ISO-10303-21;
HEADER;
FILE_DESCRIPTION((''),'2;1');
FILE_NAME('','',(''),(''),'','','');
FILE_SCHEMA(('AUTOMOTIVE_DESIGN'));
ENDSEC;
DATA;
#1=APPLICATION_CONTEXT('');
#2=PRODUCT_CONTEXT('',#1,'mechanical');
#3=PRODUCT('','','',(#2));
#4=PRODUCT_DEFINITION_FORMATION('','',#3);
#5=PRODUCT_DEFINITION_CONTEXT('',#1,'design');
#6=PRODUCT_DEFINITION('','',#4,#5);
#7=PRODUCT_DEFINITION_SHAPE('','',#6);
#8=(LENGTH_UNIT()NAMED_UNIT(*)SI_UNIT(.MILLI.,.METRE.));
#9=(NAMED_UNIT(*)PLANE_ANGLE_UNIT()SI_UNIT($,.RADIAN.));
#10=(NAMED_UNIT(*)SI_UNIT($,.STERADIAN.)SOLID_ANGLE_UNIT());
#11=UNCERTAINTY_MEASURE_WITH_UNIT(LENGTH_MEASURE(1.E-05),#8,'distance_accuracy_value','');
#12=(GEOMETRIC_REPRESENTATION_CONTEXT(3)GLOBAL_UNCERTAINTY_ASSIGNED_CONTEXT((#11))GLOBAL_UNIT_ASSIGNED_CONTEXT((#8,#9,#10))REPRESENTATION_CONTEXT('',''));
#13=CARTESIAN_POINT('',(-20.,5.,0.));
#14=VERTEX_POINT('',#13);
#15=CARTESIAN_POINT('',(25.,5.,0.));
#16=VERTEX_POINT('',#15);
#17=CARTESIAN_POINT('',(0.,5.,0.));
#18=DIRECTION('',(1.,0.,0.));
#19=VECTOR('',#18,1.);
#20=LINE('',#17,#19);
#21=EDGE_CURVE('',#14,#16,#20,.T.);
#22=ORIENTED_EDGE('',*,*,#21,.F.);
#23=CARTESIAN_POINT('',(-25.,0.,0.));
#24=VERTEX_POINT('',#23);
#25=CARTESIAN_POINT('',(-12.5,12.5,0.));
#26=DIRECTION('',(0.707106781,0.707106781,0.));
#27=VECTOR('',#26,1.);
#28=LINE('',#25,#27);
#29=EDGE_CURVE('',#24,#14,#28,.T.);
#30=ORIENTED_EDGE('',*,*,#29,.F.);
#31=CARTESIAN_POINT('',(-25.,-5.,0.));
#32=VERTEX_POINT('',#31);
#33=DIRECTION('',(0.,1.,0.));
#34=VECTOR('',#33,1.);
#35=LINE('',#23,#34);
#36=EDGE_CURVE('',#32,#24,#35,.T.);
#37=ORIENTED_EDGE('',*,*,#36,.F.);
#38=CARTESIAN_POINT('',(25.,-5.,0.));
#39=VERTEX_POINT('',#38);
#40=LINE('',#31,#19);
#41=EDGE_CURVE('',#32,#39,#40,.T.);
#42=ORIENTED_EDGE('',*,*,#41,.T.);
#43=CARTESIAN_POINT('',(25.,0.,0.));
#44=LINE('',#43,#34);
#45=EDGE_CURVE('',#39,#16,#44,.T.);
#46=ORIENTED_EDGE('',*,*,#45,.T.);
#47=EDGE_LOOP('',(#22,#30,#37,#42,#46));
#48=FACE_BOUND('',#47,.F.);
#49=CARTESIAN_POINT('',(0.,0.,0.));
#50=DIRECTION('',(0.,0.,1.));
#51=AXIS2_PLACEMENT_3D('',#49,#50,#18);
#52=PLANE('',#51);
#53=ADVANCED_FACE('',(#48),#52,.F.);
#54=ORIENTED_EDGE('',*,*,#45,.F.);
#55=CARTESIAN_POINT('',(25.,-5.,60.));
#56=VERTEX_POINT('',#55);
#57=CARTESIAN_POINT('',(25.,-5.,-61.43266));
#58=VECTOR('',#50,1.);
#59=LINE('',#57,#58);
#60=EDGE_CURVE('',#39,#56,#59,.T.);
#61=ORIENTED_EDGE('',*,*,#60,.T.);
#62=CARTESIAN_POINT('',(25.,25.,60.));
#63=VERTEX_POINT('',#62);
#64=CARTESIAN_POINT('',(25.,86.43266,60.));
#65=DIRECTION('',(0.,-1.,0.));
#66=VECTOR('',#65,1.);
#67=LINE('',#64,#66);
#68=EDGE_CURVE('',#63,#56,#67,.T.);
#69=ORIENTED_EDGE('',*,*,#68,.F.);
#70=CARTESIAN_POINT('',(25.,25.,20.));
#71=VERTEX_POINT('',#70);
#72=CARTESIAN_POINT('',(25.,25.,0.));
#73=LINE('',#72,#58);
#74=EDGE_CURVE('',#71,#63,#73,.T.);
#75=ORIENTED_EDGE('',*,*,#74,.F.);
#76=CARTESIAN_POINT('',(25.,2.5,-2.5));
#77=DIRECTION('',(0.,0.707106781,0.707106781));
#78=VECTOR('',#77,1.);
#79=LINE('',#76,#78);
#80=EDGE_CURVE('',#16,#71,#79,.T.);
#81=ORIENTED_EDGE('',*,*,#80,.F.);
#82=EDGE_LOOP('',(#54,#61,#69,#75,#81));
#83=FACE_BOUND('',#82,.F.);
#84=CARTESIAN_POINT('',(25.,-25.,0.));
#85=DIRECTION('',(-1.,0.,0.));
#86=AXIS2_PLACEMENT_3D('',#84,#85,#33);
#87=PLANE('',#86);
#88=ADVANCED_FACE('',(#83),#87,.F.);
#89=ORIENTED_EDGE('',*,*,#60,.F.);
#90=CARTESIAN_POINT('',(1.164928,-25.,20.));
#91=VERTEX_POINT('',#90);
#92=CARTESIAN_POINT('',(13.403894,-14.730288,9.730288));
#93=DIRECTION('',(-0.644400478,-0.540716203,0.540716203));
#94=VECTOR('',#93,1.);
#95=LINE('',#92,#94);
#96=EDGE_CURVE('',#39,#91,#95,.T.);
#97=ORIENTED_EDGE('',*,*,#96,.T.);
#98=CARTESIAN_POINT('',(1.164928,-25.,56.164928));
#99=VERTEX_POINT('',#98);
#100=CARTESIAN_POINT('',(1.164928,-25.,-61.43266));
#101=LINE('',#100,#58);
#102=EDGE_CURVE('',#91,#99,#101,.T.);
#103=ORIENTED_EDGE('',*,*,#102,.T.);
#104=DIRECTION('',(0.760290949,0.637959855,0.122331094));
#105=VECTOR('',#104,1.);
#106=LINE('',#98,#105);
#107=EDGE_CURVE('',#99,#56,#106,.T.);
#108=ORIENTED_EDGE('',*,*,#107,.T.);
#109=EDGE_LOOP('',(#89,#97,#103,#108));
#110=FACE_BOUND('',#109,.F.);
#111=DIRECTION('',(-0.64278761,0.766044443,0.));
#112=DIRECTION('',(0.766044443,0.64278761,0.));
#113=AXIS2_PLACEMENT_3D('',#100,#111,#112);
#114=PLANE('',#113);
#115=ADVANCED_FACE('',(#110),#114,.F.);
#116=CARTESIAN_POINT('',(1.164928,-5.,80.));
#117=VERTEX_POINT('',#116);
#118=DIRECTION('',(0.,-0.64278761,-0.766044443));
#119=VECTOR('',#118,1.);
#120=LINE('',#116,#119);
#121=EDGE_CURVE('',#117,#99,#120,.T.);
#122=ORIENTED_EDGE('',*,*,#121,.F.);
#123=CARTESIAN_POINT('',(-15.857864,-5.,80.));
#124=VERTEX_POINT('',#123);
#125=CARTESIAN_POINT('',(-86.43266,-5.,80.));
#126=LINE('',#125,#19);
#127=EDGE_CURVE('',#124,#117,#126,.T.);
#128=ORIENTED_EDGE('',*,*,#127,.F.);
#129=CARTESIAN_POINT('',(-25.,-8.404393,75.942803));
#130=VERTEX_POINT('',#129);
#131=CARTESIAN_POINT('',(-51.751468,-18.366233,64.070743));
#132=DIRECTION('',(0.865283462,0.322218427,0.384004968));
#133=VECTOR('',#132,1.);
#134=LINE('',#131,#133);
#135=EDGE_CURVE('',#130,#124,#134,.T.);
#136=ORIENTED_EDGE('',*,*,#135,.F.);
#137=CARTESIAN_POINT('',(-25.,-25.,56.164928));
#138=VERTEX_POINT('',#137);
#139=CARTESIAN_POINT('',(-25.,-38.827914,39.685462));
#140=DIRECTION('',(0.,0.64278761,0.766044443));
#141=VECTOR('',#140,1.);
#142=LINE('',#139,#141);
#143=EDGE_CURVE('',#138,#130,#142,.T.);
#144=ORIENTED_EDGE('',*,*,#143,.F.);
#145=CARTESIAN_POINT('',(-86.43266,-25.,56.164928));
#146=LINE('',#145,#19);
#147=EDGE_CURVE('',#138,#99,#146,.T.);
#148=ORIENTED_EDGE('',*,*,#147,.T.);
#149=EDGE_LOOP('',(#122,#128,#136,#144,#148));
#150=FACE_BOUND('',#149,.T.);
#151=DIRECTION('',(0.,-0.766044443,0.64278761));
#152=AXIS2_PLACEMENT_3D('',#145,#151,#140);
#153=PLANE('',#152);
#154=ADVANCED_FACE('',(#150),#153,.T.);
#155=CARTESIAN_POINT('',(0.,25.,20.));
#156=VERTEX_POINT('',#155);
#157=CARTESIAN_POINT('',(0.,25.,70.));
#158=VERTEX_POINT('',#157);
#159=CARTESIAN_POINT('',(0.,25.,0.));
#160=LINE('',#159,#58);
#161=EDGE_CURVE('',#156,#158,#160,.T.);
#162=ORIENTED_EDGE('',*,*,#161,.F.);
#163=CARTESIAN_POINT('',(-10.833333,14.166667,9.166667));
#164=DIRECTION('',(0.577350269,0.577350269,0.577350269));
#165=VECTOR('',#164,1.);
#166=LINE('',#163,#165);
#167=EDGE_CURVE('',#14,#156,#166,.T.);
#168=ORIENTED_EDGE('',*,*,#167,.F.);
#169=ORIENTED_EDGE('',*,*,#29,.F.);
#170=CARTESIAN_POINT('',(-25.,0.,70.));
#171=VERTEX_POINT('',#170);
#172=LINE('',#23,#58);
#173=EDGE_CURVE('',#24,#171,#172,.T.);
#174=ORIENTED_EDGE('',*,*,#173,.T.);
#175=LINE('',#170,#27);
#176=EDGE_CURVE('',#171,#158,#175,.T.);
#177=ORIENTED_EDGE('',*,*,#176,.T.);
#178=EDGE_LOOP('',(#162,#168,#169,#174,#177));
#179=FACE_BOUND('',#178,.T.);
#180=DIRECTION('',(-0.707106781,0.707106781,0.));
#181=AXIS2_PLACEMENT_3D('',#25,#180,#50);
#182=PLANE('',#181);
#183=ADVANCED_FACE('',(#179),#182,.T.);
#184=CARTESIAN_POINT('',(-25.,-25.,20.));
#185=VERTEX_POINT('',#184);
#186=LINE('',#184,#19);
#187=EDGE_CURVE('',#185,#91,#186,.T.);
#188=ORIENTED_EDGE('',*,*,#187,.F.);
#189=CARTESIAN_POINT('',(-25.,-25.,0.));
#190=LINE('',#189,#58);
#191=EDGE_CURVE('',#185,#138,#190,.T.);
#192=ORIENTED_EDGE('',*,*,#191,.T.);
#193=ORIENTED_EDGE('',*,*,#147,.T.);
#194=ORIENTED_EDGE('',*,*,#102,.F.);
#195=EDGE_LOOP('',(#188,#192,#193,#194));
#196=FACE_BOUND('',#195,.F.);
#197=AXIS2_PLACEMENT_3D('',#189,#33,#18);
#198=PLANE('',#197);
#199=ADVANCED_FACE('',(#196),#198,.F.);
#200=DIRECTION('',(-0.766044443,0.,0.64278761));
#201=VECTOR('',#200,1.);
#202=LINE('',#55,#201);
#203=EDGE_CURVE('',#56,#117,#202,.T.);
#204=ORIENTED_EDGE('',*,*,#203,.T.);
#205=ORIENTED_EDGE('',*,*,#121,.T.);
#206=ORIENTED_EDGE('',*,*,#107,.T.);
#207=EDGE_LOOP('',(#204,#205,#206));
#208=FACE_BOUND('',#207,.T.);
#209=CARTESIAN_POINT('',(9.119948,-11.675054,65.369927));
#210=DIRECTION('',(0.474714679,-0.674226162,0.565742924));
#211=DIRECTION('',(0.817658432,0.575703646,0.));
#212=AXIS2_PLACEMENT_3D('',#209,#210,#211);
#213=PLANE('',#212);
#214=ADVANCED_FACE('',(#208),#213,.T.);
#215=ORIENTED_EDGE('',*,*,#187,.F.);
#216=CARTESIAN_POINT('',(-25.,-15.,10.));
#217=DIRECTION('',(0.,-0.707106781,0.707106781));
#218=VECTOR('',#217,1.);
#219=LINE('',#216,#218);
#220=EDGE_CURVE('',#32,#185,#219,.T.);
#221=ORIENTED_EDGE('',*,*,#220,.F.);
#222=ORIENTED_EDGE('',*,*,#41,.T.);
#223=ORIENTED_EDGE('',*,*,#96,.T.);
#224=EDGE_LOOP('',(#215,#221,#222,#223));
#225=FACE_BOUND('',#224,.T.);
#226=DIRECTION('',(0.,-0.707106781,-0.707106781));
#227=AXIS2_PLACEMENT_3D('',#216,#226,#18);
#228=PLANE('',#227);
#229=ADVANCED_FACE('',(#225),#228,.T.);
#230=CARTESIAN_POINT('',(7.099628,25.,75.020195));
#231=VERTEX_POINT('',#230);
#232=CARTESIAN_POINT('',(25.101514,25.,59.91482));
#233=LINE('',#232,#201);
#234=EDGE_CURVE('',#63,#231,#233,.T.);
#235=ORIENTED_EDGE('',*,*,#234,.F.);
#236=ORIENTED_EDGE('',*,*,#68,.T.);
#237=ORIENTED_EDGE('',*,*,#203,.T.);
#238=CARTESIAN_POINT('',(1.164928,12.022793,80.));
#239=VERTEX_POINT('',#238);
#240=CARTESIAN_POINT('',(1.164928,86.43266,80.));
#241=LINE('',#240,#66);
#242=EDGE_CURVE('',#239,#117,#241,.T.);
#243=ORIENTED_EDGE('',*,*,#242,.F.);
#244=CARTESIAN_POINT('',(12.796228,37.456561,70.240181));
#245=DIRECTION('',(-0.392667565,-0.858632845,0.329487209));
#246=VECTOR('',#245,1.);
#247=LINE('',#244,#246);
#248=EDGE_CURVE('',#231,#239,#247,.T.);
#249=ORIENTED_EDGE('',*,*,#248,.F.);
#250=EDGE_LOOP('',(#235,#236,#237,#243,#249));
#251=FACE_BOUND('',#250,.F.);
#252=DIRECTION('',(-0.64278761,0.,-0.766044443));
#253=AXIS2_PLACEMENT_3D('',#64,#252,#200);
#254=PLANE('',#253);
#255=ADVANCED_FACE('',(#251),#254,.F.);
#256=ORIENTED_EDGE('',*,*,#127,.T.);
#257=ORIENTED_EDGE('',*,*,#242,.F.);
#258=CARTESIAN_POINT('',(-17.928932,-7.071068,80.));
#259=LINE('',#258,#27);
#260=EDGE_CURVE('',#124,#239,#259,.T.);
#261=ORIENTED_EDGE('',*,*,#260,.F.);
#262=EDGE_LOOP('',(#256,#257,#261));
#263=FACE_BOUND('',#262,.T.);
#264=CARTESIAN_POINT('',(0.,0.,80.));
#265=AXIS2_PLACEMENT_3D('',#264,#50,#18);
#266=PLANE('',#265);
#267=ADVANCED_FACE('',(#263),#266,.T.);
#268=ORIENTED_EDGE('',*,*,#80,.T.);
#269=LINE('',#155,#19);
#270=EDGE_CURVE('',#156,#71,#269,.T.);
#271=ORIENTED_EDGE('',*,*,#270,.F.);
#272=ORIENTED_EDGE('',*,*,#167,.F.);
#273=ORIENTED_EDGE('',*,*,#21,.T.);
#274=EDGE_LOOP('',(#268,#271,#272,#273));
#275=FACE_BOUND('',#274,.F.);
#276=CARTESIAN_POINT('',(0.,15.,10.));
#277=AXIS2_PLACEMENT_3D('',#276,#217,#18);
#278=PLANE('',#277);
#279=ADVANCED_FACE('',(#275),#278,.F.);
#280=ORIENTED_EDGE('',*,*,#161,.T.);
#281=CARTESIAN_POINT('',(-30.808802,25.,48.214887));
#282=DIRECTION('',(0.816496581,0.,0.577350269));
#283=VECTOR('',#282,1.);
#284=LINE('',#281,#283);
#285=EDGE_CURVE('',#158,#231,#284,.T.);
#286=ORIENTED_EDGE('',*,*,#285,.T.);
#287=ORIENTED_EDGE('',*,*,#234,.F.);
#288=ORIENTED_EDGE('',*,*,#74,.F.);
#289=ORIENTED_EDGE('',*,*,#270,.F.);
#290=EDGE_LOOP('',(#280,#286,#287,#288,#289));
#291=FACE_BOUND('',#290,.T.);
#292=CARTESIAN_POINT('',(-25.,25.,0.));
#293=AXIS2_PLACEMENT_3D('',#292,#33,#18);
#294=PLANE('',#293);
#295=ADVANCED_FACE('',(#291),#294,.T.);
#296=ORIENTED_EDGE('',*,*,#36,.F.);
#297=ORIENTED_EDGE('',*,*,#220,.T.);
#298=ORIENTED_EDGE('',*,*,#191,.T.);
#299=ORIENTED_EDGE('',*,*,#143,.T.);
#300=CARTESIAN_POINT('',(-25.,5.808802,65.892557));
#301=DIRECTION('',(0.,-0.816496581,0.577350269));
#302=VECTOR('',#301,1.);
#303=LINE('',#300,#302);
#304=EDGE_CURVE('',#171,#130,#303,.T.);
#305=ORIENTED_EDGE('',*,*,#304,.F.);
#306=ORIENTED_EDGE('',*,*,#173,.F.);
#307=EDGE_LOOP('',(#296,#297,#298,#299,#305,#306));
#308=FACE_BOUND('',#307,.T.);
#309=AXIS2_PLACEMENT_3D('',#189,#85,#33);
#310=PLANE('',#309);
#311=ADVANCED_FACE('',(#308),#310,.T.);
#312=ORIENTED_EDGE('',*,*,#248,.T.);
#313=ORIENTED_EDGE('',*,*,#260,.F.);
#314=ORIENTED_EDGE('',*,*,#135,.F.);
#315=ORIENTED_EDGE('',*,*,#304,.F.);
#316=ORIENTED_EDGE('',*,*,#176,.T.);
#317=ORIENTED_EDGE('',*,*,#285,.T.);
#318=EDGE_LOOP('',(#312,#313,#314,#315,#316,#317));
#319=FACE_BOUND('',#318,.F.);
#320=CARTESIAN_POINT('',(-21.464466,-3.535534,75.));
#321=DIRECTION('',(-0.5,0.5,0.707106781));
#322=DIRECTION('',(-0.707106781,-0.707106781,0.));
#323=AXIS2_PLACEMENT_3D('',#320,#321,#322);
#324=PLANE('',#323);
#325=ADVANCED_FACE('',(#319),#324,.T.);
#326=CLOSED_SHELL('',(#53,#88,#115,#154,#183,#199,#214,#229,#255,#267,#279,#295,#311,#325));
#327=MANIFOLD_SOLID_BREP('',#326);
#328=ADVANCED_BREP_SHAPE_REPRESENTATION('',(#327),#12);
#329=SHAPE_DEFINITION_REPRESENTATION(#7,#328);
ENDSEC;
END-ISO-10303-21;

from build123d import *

# Parameters (mm, degrees)
F0_W        = 50
F0_H        = 50
F1_DEPTH    = 80
F2_T1_DEPTH = 27.2793198937
F2_T3_DEPTH = 202.8653193294
F2_T5_DEPTH = 172.8653193294
F2_T7_DEPTH = 172.8653193294
F3_SIZE     = 25
F4_SIZE     = 10
F5_SIZE     = 20


# Not quite as in the source:
# - a fillet or chamfer that OpenCascade refuses, or shapes differently, is made with other operations: its cross-section is extruded or revolved along the edge and cut away or added


with BuildPart() as f1:
    # F0 (on Top) → F1 (new body)
    with BuildSketch(Plane.XY):
        Rectangle(F0_W, F0_H)
    extrude(amount=F1_DEPTH)

    # F2: chamfer of 20 x 23.8350718519 on 3 edges, made by hand

    # F2_s2 → F2_t1 (cut)
    with BuildSketch(Plane(origin=(23.3481641649, -33.1608518108, 27.825258524), x_dir=(0.8176584321, 0.5757036463, 0), z_dir=(0.4747146788, -0.6742261621, 0.565742924))):
        Polygon((-13.4400778356, 34.368541497), (17.5629425707, 39.0194717243), (-1.9260049086, 63.2741944877), align=None)
    extrude(amount=F2_T1_DEPTH, mode=Mode.SUBTRACT)

    # F2_s4 → F2_t3 (cut)
    with BuildSketch(Plane.XY.offset(-61.4326596647)):
        Polygon((1.1649281481, -25), (25, -5), (25, -25), align=None)
    extrude(amount=F2_T3_DEPTH, mode=Mode.SUBTRACT)

    # F2_s6 → F2_t5 (cut)
    with BuildSketch(Plane.XZ.offset(-86.4326596647)):
        Polygon((25, 60), (1.1649281481, 80), (25, 80), align=None)
    extrude(amount=F2_T5_DEPTH, mode=Mode.SUBTRACT)

    # F2_s8 → F2_t7 (cut)
    with BuildSketch(Plane.YZ.offset(-86.4326596647)):
        Polygon((-25, 56.1649281481), (-5, 80), (-25, 80), align=None)
    extrude(amount=F2_T7_DEPTH, mode=Mode.SUBTRACT)

    # F3
    f3_edges = [f1.edges().sort_by_distance(p)[0] for p in [
        (-25, 25, 40),
    ]]
    chamfer(f3_edges, length=F3_SIZE)

    # F4
    f4_edges = [f1.edges().sort_by_distance(p)[0] for p in [
        (-12.5, 12.5, 80),
    ]]
    chamfer(f4_edges, length=F4_SIZE)

    # F5
    f5_edges = [f1.edges().sort_by_distance(p)[0] for p in [
        (12.5, 25, 0),
        (-11.917536, -25, 0),
    ]]
    chamfer(f5_edges, length=F5_SIZE)


solid = f1.part
